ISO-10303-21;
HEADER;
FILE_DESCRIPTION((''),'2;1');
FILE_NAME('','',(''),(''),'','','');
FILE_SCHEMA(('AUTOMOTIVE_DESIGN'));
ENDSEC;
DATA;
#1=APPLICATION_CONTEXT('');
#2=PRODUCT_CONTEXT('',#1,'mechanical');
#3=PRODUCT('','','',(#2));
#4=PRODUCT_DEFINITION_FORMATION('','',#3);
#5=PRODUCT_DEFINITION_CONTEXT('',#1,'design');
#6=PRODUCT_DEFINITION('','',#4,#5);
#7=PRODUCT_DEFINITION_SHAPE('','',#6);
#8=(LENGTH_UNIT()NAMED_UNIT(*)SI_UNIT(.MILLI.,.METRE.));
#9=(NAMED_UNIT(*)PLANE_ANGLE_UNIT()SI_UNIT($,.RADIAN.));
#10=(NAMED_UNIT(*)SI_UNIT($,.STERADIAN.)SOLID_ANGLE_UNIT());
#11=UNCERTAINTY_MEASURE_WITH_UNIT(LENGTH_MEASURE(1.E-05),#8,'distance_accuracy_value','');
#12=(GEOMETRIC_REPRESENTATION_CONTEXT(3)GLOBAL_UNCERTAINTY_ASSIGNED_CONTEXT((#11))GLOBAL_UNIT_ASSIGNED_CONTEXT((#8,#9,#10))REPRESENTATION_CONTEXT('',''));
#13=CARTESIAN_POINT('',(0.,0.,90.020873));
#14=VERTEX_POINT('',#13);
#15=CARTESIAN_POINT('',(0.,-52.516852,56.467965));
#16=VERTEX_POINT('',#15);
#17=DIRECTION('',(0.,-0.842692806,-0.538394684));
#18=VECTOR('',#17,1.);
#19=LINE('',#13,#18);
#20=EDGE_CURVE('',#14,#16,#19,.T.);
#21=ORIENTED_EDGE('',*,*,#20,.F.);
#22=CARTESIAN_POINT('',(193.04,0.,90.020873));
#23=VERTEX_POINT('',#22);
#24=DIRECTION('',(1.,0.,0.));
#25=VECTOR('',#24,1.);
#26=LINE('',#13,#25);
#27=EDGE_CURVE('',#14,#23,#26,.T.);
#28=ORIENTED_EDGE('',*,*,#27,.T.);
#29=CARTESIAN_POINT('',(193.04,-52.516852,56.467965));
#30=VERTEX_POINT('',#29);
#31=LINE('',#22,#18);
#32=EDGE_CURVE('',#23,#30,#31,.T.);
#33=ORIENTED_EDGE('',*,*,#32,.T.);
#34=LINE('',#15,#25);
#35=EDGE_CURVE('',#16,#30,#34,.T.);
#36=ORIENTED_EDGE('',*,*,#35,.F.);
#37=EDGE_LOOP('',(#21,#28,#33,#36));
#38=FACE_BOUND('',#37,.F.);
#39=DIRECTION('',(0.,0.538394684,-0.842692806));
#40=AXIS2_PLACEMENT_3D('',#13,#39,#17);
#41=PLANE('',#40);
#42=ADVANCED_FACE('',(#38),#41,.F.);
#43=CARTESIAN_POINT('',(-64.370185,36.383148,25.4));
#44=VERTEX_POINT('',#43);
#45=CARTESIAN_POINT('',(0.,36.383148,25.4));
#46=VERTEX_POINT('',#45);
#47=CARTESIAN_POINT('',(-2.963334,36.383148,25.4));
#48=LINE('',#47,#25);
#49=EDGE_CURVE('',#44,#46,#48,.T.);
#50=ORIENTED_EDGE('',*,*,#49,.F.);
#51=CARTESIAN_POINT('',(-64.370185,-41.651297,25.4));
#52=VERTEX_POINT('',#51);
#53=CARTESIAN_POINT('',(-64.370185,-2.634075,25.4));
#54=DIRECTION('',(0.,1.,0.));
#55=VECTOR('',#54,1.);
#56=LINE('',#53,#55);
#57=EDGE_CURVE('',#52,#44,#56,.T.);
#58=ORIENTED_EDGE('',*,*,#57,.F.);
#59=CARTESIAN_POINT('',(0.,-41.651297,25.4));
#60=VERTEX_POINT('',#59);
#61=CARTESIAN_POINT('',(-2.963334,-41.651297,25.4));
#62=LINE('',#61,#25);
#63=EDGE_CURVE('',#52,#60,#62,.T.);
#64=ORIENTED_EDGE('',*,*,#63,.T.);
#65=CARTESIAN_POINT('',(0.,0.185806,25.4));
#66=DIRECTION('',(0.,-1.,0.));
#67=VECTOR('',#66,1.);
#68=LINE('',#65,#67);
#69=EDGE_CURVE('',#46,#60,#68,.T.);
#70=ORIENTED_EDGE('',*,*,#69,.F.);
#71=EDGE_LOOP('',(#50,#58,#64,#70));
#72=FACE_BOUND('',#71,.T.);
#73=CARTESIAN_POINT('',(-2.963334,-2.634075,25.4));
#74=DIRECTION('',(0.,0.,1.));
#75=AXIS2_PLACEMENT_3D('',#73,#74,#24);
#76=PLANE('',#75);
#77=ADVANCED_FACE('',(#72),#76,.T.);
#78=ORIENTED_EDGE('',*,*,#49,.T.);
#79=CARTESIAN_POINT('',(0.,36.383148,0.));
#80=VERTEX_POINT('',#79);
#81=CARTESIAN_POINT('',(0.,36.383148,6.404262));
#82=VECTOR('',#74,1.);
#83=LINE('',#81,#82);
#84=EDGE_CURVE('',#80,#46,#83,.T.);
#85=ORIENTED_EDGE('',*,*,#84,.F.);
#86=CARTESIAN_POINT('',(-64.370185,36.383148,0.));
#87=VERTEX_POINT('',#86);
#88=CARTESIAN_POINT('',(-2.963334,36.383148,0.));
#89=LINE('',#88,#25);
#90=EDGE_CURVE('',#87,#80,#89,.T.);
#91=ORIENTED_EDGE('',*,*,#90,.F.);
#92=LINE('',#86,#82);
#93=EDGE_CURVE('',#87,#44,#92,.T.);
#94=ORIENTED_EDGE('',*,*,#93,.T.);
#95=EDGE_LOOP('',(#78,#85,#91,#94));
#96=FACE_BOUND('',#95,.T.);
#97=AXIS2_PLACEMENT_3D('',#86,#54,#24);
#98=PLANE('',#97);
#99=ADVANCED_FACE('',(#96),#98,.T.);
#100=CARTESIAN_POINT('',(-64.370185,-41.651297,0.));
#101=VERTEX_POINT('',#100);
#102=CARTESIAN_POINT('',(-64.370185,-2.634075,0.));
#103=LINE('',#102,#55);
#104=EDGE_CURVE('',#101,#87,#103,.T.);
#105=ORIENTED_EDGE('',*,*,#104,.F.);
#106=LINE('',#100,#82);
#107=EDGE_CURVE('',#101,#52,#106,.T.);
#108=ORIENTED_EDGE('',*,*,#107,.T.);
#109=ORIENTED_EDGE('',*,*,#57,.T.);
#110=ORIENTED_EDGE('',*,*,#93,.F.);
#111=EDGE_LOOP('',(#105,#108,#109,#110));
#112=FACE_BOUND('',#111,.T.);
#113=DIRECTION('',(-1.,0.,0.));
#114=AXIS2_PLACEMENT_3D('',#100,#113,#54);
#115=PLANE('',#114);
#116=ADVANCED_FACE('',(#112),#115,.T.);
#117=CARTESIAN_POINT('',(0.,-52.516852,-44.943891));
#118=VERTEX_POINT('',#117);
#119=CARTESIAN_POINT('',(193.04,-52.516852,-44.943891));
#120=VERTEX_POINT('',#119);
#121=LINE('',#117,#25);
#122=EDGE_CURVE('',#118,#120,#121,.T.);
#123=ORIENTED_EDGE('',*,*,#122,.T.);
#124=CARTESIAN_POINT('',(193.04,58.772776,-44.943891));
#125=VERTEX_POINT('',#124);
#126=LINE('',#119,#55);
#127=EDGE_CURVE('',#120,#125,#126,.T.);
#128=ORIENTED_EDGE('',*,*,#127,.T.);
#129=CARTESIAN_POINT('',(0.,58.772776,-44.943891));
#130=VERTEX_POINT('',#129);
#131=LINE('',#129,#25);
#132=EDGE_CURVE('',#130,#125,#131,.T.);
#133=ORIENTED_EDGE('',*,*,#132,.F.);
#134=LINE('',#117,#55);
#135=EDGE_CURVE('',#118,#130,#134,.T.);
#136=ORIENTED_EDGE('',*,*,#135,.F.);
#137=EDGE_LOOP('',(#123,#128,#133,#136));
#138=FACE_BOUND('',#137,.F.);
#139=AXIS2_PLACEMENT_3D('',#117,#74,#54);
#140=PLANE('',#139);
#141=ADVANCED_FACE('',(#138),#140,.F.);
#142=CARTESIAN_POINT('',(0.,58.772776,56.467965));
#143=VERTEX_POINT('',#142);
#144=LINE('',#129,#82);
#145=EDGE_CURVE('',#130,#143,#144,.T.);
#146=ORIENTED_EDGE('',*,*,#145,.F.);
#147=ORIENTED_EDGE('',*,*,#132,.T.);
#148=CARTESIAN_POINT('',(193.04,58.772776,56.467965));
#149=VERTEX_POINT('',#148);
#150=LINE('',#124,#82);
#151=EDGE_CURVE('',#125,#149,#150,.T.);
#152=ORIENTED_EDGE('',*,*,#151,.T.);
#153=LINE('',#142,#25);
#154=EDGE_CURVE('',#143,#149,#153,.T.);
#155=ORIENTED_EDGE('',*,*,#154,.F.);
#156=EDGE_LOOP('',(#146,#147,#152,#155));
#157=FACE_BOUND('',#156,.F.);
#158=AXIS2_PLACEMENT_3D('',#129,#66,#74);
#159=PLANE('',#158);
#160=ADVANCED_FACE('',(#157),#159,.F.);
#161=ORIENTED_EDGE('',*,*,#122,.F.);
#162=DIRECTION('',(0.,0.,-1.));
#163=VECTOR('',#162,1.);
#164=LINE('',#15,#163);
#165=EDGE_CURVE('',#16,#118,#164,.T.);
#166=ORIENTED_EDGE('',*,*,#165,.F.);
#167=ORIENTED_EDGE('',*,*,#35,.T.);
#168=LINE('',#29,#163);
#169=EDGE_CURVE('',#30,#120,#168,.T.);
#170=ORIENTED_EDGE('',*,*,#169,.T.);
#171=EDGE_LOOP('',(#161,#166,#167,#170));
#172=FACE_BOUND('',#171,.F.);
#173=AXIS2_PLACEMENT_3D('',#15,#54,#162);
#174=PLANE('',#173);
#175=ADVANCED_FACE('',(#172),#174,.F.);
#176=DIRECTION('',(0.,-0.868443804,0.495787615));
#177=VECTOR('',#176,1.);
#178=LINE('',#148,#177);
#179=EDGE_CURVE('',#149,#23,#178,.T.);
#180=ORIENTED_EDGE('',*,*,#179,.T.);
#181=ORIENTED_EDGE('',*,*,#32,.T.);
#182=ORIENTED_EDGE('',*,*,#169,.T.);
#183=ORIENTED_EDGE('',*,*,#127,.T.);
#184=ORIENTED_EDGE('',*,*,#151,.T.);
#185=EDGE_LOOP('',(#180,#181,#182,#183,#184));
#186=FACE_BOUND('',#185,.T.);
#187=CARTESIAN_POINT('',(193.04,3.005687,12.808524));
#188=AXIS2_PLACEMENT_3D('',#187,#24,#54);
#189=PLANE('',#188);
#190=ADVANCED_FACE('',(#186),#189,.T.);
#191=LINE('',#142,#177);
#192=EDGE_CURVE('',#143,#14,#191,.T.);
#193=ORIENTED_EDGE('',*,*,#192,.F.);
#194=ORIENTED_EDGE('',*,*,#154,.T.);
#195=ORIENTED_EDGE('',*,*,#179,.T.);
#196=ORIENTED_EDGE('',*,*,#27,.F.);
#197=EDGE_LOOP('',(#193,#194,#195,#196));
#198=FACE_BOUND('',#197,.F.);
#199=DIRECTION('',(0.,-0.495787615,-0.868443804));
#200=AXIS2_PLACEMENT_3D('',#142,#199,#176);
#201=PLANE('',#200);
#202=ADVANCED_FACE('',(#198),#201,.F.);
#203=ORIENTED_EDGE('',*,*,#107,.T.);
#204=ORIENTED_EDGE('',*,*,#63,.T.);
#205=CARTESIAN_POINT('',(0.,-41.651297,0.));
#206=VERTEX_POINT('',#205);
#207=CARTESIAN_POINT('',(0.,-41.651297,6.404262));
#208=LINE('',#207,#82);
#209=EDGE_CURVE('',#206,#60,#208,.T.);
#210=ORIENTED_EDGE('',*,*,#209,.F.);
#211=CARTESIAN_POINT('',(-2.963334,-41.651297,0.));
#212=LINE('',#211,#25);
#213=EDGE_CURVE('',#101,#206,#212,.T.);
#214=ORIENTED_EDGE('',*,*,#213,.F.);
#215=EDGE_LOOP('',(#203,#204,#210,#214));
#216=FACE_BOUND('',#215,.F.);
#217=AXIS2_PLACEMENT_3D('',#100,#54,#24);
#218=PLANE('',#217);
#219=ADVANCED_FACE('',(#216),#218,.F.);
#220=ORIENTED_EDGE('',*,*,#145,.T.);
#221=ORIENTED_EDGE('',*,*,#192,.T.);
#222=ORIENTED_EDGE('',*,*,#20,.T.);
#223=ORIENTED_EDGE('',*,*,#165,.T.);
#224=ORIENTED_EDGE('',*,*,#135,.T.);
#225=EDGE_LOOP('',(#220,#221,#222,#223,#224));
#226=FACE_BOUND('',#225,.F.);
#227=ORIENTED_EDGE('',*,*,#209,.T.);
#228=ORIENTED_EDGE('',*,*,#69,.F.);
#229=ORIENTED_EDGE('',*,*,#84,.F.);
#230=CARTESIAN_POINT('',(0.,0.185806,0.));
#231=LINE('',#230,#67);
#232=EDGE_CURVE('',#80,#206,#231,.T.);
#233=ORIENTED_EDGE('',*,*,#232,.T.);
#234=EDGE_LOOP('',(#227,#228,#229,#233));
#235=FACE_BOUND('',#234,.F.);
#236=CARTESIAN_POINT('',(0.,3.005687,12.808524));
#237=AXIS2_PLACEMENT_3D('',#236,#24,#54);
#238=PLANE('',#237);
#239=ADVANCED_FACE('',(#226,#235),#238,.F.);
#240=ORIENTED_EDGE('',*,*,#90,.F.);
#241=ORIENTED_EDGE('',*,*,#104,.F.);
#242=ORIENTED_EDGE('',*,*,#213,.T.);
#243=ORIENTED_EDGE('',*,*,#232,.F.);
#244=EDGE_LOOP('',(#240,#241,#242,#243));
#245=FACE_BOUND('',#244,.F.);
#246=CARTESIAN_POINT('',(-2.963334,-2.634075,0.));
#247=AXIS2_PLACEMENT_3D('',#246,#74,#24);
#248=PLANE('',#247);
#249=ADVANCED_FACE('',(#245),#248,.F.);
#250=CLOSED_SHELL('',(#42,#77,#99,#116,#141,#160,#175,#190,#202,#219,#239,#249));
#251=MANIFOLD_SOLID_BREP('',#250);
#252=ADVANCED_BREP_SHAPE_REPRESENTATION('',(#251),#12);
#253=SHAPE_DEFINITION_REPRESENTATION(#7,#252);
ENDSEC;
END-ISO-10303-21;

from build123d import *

# Parameters (mm, degrees)
F1_DEPTH = 193.04
F2_W     = 122.8137016296
F2_H     = 78.0344456434
F3_DEPTH = 25.4


# Not quite as in the source:
# - a feature names something its author has since deleted; it is built from what else it names


with BuildPart() as f1:
    # F0 (on Right) → F1 (new body)
    with BuildSketch(Plane.YZ):
        Polygon((-52.5168515742, 56.4679652452), (-52.5168515742, -44.9438914657), (58.7727762759, -44.9438914657), (58.7727762759, 56.4679652452), (0, 90.0208726525), align=None)
    extrude(amount=F1_DEPTH)

    # F2 (on Top) → F3 (join)
    with BuildSketch(Plane.XY):
        with Locations((-2.963334322, -2.6340745389)):
            Rectangle(F2_W, F2_H)
    extrude(amount=F3_DEPTH)


solid = f1.part
